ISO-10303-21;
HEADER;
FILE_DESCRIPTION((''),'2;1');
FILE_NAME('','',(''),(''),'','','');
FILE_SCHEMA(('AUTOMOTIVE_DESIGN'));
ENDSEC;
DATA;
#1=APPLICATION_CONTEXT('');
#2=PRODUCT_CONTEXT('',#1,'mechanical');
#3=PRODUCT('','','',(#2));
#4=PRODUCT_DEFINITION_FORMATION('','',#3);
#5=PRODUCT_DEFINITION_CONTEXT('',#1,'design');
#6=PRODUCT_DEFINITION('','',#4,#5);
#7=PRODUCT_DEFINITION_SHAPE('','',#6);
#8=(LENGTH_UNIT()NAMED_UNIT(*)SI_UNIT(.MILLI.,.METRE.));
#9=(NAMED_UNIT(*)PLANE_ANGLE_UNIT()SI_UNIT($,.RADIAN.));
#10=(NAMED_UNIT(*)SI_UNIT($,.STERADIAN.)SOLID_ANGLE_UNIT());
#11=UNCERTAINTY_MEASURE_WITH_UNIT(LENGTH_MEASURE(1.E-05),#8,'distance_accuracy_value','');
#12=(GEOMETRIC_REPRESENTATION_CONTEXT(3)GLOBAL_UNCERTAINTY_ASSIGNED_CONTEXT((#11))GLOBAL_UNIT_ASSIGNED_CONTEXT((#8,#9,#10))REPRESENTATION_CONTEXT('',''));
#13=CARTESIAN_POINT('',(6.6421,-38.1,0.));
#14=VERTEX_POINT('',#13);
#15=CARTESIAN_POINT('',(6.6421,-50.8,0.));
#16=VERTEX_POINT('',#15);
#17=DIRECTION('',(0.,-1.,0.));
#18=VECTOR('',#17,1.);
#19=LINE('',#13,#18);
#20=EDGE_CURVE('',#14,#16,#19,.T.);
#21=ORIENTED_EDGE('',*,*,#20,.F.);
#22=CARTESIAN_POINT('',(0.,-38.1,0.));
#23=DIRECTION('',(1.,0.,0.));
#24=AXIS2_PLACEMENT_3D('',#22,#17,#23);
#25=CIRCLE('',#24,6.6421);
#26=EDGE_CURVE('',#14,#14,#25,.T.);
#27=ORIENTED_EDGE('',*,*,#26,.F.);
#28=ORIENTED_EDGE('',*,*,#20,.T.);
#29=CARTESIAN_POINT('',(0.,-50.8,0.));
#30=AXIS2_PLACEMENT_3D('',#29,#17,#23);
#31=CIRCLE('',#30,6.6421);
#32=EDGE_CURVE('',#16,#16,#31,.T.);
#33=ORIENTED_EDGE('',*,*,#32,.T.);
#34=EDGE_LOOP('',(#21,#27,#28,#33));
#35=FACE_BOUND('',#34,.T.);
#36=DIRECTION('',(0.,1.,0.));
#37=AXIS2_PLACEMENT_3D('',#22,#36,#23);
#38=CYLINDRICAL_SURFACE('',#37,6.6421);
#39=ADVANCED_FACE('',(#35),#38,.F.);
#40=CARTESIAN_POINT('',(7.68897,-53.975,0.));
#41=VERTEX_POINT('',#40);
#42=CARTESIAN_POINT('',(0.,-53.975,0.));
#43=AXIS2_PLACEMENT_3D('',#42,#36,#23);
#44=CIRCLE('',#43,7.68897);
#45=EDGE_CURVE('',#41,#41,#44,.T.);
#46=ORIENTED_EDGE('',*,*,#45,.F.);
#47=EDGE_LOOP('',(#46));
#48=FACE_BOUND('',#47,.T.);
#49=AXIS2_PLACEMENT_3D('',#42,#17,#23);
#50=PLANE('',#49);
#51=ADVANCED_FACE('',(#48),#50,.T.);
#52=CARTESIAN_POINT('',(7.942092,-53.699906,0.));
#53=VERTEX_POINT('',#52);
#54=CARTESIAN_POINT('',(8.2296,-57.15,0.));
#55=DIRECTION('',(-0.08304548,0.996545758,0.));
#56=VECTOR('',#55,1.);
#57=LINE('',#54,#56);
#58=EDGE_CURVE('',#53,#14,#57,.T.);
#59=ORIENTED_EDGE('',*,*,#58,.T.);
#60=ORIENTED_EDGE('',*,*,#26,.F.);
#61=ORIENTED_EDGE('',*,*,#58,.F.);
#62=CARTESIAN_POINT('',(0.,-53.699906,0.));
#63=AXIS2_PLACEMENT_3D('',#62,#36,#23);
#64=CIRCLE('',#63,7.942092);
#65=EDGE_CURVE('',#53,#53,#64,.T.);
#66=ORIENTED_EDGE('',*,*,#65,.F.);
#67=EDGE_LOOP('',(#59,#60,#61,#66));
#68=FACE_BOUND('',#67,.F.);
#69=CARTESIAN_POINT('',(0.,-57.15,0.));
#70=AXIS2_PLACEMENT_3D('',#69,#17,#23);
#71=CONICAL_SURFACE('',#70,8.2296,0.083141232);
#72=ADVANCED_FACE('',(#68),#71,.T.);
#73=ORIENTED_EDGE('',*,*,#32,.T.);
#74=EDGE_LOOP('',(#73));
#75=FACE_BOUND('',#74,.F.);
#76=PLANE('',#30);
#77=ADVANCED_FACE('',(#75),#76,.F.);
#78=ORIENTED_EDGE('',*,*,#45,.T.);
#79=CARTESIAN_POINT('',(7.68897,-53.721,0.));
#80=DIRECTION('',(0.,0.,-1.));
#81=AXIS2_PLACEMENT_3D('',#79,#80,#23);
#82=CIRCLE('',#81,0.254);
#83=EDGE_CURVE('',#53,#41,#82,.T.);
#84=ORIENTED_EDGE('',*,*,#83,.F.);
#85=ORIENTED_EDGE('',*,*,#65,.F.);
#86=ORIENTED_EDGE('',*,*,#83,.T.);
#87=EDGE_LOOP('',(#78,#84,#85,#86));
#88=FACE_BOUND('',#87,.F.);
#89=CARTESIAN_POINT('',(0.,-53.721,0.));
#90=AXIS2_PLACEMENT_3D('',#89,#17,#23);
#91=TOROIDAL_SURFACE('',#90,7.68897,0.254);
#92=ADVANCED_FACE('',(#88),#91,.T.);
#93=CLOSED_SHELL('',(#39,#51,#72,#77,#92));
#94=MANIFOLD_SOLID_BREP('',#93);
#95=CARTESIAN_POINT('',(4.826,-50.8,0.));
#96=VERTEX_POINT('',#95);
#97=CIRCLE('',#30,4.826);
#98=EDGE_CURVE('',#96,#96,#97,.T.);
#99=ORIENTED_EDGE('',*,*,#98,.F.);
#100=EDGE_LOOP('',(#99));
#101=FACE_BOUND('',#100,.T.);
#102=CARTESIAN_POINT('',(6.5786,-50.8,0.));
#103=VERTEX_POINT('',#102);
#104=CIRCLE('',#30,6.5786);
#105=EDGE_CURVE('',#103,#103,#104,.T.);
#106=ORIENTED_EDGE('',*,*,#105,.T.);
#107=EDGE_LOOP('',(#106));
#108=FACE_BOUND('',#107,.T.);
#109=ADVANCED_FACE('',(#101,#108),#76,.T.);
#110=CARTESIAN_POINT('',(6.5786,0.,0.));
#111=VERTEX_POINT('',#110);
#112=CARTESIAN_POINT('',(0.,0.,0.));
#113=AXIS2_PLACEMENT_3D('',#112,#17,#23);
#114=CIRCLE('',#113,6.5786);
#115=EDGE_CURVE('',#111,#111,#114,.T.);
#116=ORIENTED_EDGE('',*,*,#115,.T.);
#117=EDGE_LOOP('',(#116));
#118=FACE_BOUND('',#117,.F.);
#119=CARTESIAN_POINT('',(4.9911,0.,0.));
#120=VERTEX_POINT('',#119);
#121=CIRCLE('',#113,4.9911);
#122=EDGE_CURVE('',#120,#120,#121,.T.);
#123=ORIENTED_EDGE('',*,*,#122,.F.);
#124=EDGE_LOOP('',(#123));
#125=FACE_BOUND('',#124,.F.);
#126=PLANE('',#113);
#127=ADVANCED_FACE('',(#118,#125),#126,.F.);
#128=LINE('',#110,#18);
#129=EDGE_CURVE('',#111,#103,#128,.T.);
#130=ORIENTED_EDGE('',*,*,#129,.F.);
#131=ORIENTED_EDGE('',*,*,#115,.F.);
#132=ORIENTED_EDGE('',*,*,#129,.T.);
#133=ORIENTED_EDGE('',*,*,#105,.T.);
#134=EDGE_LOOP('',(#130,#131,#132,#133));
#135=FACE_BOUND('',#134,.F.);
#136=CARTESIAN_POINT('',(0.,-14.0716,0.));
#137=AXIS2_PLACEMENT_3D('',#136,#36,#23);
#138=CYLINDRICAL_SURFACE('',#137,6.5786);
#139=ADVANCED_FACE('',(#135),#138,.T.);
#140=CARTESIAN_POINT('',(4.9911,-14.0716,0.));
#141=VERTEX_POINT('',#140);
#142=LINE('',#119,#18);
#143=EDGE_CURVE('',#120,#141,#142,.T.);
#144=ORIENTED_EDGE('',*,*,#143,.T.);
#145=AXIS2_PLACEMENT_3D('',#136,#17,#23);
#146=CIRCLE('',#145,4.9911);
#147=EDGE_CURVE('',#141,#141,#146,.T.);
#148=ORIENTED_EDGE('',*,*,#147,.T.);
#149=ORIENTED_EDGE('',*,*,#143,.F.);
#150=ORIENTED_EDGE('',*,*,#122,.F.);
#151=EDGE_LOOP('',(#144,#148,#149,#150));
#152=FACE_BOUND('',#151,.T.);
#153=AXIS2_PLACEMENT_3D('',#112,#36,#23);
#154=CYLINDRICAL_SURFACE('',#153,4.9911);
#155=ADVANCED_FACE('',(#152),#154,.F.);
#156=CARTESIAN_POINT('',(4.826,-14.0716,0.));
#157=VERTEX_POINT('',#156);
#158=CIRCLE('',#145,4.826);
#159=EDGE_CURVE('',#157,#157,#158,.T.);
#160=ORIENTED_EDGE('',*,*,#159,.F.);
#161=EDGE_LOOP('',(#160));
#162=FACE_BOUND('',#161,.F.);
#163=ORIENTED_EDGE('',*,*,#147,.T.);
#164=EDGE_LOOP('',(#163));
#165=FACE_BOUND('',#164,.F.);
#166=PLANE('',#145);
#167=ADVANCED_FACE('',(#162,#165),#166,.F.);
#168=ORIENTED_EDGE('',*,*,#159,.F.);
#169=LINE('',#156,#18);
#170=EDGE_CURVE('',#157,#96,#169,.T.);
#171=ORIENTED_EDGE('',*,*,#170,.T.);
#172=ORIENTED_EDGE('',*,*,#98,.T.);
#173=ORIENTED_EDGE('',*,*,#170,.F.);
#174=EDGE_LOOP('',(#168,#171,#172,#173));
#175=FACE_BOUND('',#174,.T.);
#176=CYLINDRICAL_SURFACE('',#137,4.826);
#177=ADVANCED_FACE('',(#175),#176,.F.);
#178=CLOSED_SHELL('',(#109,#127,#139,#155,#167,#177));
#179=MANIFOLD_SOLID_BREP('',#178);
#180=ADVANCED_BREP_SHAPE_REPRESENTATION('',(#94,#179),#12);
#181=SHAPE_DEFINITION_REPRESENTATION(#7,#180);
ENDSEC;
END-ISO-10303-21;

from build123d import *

# Parameters (mm, degrees)
F0_R     = 6.5786
F0_R_2   = 4.9911
F1_DEPTH = 14.0716
F3_START = 14.0716
F2_R     = 6.5786
F2_R_2   = 4.826
F3_DEPTH = 36.7284
F5_START = 38.1
F4_R     = 8.2296
F4_R_2   = 6.6421
F5_DEPTH = 12.7
F7_START = 50.8
F6_R     = 8.2296
F7_DEPTH = 3.175
F9_R     = 0.254


# Not quite as in the source:
# - a fillet or chamfer that OpenCascade refuses, or shapes differently, is made with other operations: its cross-section is extruded or revolved along the edge and cut away or added


with BuildPart() as f1:
    # F0 (on Front) → F1 (new body)
    with BuildSketch(Plane.XZ):
        Circle(F0_R)
        Circle(F0_R_2, mode=Mode.SUBTRACT)
    extrude(amount=F1_DEPTH)

    # F2 (on Front) → F3 (join)
    with BuildSketch(Plane.XZ.offset(F3_START)):
        Circle(F2_R)
        Circle(F2_R_2, mode=Mode.SUBTRACT)
    extrude(amount=F3_DEPTH)


with BuildPart() as f5:
    # F4 (on Front) → F5 (new body)
    with BuildSketch(Plane.XZ.offset(F5_START)):
        Circle(F4_R)
        Circle(F4_R_2, mode=Mode.SUBTRACT)
    extrude(amount=F5_DEPTH)

    # F6 (on Front) → F7 (join)
    with BuildSketch(Plane.XZ.offset(F7_START)):
        Circle(F6_R)
    extrude(amount=F7_DEPTH)

    # F8: chamfer of 19.05 x 1.5875 on 1 edges, made by hand

    # F8_s1 → F8_t2 (revolve, cut)
    with BuildSketch(Plane.XY):
        Polygon((8.2296, -57.15), (6.6421, -38.1), (8.2296, -38.1), align=None)
    revolve(axis=Axis((0, -38.1, 0), (0, -1, 0)), mode=Mode.SUBTRACT)

    # F9
    f9_edges = [f5.edges().sort_by_distance(p)[0] for p in [
        (-7.965017, -53.975, 0),
    ]]
    fillet(f9_edges, radius=F9_R)


solid = Compound([f1.part, f5.part])
